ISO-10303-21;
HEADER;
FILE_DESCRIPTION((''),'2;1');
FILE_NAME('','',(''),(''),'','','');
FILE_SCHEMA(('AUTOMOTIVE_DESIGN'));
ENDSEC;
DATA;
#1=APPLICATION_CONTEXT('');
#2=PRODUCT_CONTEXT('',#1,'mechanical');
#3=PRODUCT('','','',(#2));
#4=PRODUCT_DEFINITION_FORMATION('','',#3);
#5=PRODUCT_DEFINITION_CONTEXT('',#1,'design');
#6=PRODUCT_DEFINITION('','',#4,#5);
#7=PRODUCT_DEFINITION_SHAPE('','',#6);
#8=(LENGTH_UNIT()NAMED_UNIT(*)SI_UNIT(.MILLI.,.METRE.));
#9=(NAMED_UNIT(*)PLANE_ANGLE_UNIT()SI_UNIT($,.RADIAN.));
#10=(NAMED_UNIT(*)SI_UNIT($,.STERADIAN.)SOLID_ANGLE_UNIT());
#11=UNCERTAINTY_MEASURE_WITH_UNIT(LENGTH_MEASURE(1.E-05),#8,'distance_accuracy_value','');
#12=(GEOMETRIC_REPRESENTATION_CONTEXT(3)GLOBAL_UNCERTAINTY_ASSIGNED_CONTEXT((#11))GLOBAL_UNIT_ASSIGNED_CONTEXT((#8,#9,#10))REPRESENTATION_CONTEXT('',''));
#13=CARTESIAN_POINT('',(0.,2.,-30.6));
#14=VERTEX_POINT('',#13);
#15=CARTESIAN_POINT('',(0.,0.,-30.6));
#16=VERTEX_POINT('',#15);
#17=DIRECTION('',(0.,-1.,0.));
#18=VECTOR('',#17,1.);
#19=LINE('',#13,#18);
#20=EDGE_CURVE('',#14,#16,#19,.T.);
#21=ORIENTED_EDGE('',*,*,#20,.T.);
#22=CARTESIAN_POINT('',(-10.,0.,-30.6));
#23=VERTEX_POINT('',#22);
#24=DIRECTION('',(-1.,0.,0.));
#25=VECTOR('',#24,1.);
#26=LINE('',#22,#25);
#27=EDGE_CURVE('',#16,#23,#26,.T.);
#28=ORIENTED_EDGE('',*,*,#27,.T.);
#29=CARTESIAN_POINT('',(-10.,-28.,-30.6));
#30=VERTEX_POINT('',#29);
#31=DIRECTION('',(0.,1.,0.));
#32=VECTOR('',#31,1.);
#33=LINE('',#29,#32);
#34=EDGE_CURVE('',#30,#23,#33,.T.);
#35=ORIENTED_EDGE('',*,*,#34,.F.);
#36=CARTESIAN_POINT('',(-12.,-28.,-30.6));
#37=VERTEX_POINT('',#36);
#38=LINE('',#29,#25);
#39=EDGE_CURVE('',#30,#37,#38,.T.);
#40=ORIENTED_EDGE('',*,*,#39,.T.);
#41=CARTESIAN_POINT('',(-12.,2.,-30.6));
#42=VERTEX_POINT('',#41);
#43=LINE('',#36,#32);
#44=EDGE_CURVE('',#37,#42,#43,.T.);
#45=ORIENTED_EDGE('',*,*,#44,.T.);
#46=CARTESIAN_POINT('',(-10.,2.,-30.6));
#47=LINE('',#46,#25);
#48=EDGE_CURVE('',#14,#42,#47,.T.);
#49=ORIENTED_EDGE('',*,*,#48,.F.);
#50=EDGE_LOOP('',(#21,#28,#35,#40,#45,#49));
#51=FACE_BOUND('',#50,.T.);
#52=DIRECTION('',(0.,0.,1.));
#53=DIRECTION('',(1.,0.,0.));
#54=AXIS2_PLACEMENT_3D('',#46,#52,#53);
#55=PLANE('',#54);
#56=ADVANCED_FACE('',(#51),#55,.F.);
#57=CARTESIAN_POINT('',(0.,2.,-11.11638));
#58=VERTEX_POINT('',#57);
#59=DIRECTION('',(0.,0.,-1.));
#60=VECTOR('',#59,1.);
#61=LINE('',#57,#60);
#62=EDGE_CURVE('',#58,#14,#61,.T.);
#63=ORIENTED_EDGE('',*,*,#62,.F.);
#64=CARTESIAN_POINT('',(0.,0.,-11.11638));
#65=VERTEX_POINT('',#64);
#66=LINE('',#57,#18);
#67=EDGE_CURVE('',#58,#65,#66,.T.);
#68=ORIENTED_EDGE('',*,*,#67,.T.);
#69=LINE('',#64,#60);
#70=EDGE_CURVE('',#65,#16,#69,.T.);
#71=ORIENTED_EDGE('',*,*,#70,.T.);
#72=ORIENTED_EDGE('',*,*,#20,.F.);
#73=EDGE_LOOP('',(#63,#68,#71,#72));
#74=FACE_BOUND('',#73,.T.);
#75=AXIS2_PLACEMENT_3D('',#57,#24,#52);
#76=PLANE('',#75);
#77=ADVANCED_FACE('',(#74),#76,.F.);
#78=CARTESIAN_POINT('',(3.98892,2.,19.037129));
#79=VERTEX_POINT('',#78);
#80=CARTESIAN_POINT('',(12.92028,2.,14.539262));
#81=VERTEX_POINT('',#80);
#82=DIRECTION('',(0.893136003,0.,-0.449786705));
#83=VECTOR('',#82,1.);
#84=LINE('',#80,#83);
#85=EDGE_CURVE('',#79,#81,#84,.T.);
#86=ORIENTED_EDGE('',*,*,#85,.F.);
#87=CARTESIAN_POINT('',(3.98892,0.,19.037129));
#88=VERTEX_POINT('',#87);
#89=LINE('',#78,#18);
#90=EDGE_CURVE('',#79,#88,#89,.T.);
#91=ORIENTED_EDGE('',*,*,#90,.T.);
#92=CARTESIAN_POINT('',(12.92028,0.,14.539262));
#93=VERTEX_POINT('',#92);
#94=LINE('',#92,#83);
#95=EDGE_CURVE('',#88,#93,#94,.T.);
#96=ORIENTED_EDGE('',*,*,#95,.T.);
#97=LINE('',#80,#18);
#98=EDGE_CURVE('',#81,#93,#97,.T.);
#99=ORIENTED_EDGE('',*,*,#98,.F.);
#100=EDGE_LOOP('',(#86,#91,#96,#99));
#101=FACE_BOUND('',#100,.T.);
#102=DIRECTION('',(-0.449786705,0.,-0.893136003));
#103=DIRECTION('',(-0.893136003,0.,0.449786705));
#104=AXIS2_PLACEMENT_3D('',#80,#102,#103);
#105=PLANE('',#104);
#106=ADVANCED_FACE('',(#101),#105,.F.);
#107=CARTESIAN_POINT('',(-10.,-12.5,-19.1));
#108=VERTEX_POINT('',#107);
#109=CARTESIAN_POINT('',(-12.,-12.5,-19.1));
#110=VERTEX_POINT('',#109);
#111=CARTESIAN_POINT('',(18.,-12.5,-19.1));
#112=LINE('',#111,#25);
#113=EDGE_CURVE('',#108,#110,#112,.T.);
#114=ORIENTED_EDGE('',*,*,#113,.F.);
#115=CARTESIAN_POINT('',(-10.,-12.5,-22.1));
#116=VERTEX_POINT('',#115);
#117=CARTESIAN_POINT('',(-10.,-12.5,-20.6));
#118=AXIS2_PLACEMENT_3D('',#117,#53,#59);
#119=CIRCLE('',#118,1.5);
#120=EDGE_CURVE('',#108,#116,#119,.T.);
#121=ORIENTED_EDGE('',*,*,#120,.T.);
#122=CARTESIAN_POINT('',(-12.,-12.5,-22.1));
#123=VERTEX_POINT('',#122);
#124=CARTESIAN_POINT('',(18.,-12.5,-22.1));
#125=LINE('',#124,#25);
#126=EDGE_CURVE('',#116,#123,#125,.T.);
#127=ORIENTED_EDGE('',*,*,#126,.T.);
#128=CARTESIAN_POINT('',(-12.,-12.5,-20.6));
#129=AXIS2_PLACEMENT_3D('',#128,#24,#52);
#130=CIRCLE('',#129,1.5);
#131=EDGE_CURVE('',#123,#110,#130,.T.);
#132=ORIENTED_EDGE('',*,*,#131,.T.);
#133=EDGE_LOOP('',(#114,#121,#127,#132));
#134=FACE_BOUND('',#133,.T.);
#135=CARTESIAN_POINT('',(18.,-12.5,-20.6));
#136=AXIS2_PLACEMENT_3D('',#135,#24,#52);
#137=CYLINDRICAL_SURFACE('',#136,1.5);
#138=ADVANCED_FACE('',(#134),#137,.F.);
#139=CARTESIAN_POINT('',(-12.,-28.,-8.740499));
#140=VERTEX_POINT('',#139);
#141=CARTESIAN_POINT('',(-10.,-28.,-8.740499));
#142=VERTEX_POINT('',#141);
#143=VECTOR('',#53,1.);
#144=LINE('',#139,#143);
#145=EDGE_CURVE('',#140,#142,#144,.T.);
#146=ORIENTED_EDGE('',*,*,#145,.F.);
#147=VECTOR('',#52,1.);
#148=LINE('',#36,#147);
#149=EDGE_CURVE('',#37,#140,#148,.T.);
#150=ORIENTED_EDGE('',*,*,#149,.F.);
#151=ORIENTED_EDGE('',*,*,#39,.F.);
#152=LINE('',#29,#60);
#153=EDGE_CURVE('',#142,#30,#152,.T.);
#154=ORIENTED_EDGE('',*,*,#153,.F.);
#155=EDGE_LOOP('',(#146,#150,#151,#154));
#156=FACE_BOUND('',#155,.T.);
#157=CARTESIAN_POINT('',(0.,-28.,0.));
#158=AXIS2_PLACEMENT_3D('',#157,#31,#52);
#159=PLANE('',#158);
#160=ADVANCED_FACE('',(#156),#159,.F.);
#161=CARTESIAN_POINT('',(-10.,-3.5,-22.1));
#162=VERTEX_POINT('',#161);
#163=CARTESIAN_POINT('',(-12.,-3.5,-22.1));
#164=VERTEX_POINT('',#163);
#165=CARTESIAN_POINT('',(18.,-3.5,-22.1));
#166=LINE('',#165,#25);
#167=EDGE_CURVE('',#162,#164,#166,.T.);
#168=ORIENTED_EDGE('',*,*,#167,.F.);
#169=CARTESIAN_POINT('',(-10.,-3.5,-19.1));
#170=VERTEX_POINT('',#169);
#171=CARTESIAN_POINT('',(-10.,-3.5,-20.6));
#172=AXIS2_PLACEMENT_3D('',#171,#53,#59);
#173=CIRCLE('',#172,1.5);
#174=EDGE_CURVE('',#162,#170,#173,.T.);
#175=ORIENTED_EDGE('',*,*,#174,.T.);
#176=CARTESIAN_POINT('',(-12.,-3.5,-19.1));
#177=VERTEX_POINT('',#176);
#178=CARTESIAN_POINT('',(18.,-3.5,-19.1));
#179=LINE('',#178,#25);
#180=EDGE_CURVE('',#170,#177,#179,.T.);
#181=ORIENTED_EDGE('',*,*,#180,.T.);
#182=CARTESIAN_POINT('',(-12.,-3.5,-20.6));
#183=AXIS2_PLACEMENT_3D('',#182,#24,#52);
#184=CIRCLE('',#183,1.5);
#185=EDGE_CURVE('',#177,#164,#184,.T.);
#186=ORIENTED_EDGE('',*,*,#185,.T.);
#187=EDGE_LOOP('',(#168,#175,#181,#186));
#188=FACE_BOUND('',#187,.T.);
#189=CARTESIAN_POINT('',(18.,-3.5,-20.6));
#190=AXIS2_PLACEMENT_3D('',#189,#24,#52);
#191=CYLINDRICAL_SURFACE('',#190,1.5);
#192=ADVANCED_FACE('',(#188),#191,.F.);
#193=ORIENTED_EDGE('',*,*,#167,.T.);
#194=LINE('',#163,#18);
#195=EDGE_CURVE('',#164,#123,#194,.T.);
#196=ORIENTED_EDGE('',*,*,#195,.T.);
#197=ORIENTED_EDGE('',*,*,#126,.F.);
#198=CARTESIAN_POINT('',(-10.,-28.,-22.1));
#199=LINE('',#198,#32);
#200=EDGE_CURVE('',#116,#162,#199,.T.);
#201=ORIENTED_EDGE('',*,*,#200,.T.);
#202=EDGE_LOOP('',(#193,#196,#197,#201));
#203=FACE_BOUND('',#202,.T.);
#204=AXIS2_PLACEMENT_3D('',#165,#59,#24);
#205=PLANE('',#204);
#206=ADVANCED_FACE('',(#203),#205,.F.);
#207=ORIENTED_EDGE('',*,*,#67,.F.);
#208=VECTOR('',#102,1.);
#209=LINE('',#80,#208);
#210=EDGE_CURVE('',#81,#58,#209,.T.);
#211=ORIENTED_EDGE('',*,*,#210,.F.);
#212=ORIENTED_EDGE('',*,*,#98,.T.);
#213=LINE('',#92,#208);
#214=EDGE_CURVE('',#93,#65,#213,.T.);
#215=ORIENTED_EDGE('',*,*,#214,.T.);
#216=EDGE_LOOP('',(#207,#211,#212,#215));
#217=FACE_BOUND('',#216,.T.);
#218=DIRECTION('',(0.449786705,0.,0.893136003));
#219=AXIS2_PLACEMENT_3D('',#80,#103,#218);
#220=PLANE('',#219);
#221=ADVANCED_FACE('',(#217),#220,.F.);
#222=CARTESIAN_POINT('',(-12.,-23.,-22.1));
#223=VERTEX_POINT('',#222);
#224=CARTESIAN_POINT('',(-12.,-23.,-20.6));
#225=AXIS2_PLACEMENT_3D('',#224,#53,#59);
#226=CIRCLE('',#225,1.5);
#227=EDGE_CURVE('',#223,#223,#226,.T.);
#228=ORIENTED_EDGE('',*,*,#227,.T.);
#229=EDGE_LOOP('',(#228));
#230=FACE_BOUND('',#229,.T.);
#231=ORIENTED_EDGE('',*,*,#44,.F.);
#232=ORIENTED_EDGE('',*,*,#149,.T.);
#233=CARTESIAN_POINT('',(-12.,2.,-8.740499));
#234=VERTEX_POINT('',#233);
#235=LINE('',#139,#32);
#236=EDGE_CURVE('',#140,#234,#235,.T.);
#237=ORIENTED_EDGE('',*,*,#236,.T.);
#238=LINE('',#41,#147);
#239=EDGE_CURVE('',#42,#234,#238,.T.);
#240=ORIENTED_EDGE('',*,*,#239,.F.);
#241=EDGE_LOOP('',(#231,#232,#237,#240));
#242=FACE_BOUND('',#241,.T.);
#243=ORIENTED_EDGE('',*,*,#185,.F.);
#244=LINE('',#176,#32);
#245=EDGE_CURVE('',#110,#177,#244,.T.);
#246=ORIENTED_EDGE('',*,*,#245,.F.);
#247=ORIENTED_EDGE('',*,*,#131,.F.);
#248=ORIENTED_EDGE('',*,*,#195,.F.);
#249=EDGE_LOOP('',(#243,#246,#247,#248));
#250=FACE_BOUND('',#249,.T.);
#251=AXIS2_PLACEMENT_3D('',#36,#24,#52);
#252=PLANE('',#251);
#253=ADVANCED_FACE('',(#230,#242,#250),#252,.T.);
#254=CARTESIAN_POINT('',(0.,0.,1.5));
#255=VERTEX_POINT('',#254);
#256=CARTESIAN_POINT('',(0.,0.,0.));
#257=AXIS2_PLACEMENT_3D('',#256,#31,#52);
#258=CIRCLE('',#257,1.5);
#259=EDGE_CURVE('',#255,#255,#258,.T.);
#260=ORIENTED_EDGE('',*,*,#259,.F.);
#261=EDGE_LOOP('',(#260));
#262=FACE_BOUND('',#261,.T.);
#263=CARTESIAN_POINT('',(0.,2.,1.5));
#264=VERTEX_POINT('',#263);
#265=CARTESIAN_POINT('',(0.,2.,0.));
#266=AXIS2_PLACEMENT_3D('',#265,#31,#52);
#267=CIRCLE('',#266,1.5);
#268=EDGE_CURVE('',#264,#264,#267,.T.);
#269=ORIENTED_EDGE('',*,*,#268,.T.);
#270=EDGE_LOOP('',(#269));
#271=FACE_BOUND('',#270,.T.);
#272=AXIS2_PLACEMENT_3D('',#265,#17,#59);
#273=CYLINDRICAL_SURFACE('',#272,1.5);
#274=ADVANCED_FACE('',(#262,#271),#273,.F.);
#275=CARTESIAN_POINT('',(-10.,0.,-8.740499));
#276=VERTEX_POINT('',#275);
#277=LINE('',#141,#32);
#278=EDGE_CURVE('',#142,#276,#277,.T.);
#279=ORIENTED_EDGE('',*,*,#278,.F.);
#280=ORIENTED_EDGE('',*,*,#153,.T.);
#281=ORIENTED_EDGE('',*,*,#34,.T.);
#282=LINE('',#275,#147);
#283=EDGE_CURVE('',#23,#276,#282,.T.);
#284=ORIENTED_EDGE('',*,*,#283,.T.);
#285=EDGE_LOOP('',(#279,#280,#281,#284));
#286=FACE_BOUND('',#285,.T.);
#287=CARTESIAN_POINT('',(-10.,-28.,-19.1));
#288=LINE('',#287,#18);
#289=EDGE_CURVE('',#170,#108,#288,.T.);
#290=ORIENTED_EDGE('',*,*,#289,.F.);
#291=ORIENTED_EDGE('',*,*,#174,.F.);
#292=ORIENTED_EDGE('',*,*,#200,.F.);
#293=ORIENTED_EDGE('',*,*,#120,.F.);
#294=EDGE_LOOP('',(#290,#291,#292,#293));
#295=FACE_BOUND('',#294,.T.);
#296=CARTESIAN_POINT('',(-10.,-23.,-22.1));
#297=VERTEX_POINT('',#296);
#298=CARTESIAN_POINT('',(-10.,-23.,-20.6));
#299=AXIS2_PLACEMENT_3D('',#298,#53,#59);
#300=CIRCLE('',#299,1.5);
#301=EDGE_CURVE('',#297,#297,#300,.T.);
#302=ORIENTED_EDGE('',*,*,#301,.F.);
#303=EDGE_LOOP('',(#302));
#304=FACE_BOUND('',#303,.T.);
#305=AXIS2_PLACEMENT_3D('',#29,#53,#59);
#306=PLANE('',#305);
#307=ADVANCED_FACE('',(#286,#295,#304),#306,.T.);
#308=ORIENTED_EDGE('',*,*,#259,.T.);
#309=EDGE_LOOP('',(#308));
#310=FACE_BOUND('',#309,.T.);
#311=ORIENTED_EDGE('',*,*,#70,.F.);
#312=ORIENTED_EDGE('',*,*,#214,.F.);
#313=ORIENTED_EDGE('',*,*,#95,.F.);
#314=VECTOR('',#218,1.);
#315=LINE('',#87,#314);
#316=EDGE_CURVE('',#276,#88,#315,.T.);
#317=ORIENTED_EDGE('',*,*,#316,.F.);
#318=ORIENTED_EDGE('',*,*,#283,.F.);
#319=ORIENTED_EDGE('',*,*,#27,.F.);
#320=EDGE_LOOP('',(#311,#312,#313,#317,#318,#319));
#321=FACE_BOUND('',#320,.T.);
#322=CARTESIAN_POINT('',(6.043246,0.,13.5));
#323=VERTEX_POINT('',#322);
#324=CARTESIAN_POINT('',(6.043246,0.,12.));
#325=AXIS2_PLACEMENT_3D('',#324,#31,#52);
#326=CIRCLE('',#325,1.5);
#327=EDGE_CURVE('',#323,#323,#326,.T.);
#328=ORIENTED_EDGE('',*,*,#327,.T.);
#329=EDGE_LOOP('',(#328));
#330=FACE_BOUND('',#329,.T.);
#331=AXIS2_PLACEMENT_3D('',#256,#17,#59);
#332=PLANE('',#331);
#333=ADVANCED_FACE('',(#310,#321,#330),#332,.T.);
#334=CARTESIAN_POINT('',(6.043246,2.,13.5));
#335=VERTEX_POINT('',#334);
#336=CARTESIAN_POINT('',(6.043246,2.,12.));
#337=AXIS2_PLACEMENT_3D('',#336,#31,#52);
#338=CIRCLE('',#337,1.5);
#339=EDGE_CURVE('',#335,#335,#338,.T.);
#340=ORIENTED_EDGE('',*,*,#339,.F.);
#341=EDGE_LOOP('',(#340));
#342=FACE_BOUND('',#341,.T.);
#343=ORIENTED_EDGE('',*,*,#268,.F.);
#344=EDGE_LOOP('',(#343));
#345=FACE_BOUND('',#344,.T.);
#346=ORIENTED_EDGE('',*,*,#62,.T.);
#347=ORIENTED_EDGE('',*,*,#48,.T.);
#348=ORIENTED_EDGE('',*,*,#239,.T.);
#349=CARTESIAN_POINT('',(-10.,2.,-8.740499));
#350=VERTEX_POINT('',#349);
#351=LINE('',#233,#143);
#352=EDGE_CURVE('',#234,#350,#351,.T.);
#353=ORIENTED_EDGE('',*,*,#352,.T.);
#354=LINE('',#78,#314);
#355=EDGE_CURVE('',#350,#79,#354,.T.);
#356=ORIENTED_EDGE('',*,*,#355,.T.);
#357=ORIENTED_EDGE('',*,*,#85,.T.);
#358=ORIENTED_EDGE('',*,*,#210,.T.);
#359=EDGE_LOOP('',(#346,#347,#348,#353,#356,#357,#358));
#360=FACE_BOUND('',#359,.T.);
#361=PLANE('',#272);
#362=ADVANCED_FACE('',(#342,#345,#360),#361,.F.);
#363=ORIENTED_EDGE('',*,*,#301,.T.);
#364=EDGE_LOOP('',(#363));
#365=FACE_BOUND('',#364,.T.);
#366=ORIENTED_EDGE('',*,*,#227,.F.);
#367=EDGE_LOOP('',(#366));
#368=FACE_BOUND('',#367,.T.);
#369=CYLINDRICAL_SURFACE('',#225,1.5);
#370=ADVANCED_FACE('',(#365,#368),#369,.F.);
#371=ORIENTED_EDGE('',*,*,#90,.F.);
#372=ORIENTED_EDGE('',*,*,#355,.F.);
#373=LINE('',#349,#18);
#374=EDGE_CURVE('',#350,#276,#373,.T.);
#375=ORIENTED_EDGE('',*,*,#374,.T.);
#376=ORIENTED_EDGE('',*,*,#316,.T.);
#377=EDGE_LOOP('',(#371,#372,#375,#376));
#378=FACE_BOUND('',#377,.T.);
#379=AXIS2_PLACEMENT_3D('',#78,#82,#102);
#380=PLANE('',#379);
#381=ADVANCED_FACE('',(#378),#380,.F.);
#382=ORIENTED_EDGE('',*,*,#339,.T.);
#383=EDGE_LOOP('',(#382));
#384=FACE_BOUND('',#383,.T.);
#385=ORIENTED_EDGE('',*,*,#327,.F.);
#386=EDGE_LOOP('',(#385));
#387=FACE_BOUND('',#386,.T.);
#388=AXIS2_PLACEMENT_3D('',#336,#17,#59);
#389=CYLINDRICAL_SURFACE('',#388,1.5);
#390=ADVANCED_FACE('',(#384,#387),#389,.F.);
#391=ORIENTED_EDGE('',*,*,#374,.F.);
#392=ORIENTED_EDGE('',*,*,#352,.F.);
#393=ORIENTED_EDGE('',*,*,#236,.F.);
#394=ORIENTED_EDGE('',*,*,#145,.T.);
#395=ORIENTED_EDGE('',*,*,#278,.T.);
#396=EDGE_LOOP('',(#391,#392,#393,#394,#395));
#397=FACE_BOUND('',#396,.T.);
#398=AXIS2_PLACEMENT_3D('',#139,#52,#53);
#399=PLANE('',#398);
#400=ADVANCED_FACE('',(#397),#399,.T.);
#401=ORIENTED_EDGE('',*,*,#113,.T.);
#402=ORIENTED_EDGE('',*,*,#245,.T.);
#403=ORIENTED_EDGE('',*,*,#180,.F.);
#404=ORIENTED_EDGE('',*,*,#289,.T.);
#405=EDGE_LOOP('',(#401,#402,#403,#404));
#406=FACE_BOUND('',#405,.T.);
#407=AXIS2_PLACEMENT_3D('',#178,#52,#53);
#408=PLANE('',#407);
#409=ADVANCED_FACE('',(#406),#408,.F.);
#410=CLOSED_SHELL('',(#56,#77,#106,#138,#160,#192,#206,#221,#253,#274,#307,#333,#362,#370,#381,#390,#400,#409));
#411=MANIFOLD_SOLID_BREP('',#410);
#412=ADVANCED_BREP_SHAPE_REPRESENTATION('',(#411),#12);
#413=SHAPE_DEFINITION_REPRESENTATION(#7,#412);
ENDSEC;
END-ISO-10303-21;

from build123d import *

# Parameters (mm, degrees)
SKETCH1_R              = 1.5
BOSS_EXTRUDE1_DEPTH    = 2
SKETCH2_W              = 2
SKETCH2_H              = 21.859501482
BOSS_EXTRUDE3_DEPTH    = 30
CUT_EXTRUDE1_START     = -12
CUT_EXTRUDE1_OUTLINE_R = 1.5
CUT_EXTRUDE1_DEPTH     = 2
CUT_EXTRUDE2_DEPTH     = 30


# Read off the part's stored shape, not the designer's step: Cut-Extrude1
with BuildPart() as part:
    # Sketch1 → Boss-Extrude1 (new body)
    with BuildSketch(Plane(origin=(0, 0, 0), x_dir=(1, 0, 0), z_dir=(0, 1, 0))):
        Polygon((-10, 30.6), (0, 30.6), (0, 11.116380148), (12.920279645, -14.539262377), (3.988919615, -19.037129429), (-10, 8.740498518), align=None)
        with Locations(Location((0, 0, 0), (0, 0, 270))):
            Circle(SKETCH1_R, mode=Mode.SUBTRACT)
        with Locations(Location((6.043245871, -12, 0), (0, 0, 270))):
            Circle(SKETCH1_R, mode=Mode.SUBTRACT)
    extrude(amount=BOSS_EXTRUDE1_DEPTH)

    # Sketch2 → Boss-Extrude3 (add)
    with BuildSketch(Plane(origin=(0, 2, 0), x_dir=(1, 0, 0), z_dir=(0, 1, 0))):
        with Locations((-11, 19.670249259)):
            Rectangle(SKETCH2_W, SKETCH2_H)
    extrude(amount=-BOSS_EXTRUDE3_DEPTH)

    # Cut-Extrude1 outline → Cut-Extrude1 (cut)
    with BuildSketch(Plane.YZ.offset(CUT_EXTRUDE1_START)):
        with Locations((-23, -20.6)):
            Circle(CUT_EXTRUDE1_OUTLINE_R)
    extrude(amount=CUT_EXTRUDE1_DEPTH, mode=Mode.SUBTRACT)

    # Sketch4 → Cut-Extrude2 (cut)
    with BuildSketch(Plane.ZY.offset(12)):
        with BuildLine():
            Line((-19.1, -3.5), (-19.1, -12.5))
            ThreePointArc((-19.1, -12.5), (-20.6, -14), (-22.1, -12.5))
            Line((-22.1, -12.5), (-22.1, -3.5))
            ThreePointArc((-22.1, -3.5), (-20.6, -2), (-19.1, -3.5))
        make_face()
    extrude(amount=-CUT_EXTRUDE2_DEPTH, mode=Mode.SUBTRACT)


solid = part.part
